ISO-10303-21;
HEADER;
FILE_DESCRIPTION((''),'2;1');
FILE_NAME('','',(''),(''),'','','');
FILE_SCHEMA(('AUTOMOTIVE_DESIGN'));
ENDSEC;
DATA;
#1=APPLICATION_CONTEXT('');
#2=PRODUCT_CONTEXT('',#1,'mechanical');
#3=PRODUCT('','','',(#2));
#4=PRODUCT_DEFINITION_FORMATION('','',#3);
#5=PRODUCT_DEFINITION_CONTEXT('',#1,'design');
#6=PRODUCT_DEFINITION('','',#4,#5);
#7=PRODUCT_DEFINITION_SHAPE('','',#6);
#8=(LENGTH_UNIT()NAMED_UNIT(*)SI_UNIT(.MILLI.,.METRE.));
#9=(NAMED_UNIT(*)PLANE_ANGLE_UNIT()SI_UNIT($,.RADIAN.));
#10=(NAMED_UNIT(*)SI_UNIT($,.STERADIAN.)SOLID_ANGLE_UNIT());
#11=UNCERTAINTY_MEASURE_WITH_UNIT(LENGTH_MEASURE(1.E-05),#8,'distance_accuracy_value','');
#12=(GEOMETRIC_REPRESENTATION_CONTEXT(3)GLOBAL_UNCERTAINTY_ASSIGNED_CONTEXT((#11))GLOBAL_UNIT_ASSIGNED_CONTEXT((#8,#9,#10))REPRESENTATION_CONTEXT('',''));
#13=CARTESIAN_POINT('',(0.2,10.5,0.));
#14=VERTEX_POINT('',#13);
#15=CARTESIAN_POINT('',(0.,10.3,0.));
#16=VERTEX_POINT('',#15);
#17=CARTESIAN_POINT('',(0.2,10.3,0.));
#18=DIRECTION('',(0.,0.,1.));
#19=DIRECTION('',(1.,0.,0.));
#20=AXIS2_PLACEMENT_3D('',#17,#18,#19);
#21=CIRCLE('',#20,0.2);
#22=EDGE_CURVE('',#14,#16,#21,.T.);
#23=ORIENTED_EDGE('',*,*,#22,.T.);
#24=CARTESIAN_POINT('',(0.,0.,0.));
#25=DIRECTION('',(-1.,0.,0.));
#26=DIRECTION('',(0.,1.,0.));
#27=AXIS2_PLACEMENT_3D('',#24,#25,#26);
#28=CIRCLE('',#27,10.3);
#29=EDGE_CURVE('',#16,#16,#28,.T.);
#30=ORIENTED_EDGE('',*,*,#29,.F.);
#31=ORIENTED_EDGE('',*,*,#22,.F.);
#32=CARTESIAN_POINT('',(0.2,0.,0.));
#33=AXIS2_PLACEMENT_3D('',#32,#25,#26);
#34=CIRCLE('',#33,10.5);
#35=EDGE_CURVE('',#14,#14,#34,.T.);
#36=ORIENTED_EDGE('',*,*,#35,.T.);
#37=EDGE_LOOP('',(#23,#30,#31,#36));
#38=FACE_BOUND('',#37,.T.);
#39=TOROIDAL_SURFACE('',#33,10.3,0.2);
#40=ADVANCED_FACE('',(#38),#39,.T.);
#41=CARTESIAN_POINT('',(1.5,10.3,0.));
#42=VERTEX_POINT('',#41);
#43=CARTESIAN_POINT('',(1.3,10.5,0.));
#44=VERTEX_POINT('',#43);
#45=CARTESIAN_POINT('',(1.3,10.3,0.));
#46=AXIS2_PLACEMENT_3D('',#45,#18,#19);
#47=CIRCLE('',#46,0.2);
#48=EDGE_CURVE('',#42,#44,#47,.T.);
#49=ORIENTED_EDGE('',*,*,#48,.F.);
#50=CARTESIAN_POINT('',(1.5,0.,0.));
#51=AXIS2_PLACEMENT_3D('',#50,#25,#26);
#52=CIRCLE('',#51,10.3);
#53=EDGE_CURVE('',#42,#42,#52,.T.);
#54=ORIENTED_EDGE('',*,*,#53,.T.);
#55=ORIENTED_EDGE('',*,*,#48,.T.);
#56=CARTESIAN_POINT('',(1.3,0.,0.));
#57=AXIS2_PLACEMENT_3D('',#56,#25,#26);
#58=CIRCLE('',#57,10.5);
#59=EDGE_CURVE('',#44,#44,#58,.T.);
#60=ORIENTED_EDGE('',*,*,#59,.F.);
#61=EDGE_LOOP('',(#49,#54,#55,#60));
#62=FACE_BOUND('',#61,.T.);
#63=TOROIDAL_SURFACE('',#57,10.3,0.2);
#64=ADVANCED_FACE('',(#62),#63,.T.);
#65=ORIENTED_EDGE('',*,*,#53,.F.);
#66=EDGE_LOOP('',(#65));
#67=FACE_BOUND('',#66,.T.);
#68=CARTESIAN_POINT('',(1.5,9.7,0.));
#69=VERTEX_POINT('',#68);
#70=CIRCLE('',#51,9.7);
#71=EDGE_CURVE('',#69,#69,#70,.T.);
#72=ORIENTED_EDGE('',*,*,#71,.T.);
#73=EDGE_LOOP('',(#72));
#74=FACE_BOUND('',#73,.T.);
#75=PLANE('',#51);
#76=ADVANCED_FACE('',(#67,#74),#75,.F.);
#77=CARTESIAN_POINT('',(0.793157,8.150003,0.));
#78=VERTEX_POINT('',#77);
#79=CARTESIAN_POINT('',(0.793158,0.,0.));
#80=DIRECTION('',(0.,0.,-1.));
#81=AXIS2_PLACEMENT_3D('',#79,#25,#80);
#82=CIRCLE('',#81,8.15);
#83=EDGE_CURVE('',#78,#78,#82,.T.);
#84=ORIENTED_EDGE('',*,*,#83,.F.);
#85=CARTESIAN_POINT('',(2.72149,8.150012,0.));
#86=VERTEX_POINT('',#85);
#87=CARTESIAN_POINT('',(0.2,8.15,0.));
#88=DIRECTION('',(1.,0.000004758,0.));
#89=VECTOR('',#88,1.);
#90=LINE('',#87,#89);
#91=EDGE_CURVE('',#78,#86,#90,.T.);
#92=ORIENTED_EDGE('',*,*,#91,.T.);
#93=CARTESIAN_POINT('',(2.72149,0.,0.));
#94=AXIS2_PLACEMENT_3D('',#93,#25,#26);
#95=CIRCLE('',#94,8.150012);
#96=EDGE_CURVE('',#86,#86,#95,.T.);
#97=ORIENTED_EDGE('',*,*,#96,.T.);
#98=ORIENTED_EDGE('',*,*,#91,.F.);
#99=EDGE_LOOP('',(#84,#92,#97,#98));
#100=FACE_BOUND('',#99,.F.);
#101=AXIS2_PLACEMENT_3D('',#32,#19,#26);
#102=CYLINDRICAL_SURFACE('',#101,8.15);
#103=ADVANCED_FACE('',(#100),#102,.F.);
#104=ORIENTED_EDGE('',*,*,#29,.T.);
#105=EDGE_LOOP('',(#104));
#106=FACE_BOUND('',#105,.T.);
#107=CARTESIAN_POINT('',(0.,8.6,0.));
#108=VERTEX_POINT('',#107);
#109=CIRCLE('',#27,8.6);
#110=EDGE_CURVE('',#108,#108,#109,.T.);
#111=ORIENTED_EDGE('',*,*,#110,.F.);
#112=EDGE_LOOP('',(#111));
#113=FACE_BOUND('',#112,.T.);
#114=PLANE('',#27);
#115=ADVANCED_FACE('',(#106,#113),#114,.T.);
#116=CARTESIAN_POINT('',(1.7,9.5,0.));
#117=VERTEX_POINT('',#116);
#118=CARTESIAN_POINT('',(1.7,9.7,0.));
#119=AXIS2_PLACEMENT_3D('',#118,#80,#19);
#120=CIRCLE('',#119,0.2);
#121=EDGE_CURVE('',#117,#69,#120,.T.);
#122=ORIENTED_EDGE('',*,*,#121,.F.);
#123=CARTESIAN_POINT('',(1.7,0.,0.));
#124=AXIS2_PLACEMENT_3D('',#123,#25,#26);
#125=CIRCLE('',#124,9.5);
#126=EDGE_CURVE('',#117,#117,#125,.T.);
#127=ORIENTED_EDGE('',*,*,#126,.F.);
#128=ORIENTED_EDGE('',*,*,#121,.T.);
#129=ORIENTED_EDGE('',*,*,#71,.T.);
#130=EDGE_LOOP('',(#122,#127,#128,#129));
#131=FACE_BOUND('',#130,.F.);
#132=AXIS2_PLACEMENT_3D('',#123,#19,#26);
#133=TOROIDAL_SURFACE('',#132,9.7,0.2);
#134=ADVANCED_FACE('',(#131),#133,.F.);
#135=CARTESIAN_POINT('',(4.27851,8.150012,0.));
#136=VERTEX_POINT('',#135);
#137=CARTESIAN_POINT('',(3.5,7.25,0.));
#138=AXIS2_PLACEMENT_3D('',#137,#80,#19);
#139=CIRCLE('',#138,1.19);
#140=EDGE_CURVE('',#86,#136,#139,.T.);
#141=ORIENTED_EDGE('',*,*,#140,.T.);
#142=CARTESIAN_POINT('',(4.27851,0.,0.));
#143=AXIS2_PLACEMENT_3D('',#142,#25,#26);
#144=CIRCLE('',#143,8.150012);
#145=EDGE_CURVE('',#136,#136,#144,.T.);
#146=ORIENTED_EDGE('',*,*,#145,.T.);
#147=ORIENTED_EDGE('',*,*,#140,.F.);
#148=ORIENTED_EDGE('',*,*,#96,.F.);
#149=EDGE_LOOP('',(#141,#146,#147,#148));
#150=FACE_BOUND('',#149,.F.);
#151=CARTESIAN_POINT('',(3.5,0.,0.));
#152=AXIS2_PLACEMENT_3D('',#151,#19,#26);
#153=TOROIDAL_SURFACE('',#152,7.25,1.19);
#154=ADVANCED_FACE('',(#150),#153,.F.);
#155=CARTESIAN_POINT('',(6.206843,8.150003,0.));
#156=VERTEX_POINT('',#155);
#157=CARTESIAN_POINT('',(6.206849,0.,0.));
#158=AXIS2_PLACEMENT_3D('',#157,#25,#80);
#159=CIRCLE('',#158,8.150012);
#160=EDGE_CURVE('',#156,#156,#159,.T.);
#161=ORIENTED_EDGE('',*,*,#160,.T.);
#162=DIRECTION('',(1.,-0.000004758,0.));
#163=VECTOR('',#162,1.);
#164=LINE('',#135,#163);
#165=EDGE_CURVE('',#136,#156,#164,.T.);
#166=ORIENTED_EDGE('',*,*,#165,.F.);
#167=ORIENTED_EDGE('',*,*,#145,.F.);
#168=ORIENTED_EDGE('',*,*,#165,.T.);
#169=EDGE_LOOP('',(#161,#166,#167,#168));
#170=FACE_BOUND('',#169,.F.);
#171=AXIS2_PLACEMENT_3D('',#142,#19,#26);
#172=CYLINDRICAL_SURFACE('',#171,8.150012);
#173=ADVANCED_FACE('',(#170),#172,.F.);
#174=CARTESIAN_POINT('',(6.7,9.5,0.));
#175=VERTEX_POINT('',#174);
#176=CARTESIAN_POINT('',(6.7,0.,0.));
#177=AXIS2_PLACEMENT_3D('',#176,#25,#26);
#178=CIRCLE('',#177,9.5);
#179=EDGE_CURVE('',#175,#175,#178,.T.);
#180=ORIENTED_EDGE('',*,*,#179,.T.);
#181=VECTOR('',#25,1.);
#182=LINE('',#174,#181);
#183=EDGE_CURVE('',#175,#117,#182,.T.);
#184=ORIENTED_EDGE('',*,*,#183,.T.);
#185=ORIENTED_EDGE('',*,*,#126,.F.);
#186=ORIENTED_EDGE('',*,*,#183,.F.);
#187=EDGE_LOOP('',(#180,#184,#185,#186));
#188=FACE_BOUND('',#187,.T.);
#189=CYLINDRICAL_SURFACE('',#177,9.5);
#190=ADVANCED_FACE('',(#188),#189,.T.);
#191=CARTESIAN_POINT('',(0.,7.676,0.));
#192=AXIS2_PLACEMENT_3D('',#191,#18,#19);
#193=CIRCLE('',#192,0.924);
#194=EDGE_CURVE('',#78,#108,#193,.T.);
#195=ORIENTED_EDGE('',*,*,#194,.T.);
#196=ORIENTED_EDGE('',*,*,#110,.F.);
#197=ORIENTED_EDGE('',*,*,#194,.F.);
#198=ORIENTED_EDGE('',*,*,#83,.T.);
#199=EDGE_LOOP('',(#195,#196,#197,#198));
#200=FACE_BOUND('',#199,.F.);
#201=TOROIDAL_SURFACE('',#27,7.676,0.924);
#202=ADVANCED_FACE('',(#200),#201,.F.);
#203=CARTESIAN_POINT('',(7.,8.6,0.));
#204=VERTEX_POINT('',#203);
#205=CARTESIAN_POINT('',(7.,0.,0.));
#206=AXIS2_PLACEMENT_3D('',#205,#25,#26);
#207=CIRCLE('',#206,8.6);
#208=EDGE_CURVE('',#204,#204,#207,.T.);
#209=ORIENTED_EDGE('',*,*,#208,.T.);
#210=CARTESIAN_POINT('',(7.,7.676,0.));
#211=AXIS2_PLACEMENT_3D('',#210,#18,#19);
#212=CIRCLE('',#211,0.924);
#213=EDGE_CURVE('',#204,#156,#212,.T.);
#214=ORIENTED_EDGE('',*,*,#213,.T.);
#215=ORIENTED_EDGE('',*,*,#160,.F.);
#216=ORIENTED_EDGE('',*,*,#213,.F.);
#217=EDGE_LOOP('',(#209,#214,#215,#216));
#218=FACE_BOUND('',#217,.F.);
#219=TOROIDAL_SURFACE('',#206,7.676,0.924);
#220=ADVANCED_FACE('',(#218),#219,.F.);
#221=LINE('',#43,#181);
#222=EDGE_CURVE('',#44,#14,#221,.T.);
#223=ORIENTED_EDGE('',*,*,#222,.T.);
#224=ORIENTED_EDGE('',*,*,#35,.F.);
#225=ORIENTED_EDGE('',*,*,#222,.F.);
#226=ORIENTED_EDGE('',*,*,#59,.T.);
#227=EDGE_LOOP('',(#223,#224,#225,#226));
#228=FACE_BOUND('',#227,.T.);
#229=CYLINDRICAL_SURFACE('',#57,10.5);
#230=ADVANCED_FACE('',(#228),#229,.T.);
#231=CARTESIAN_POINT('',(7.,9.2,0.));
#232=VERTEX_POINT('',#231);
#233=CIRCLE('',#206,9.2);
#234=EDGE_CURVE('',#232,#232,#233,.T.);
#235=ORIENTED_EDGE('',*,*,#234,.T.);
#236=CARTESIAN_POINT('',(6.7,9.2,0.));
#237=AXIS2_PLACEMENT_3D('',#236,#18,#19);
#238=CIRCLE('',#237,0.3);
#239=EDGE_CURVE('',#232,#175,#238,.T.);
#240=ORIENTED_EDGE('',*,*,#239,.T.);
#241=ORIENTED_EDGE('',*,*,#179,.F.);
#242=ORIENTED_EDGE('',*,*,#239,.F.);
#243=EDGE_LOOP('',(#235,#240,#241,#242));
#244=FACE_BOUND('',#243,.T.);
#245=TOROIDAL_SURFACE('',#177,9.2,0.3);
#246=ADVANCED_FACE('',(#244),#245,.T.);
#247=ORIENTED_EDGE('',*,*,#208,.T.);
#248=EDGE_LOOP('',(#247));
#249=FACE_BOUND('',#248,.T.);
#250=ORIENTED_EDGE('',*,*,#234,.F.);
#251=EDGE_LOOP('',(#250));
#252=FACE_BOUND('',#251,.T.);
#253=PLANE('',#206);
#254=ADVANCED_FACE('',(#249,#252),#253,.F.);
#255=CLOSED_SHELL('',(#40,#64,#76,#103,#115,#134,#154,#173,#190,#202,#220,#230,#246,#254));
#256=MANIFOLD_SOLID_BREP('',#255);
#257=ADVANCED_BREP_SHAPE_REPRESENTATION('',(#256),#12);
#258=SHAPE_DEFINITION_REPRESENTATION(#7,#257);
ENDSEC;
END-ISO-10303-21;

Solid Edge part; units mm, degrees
sketch "Sketch1" plane through (0, 0, 0) normal (0, 0, 1) x (1, 0, 0)
  line L0 (0, 10.3) -> (0, 8.35)
  arc A0 (0, 8.35) -> (0.2, 8.15) centre (0.2, 8.35) ccw
  line L1 (0.2, 8.15) -> (2.7215, 8.15)
  arc A1 (2.7215, 8.15) -> (4.2785, 8.15) centre (3.5, 7.25) cw
  line L2 (4.2785, 8.15) -> (6.8, 8.15)
  arc A2 (6.8, 8.15) -> (7, 8.35) centre (6.8, 8.35) ccw
  line L3 (7, 8.35) -> (7, 9.2)
  arc A3 (7, 9.2) -> (6.7, 9.5) centre (6.7, 9.2) ccw
  line L4 (6.7, 9.5) -> (1.7, 9.5)
  arc A4 (1.7, 9.5) -> (1.5, 9.7) centre (1.7, 9.7) cw
  line L5 (1.5, 9.7) -> (1.5, 10.3)
  arc A5 (1.5, 10.3) -> (1.3, 10.5) centre (1.3, 10.3) ccw
  line L6 (1.3, 10.5) -> (0.2, 10.5)
  arc A6 (0.2, 10.5) -> (0, 10.3) centre (0.2, 10.3) ccw
revolve "RevolvedProtrusion1" add sketch "Sketch1" angle 360 about axis through (50, 0, 0) along (-1, 0, 0)
sketch "Sketch2" plane through (0, 0, 0) normal (0, 0, 1) x (1, 0, 0)
  line L0 (0, 8.6) -> (0, 2.0375)
  line L1 (0, 2.0375) -> (7, 2.0375)
  line L2 (7, 2.0375) -> (7, 8.6)
  arc A0 (7, 8.6) -> (6.076, 7.676) centre (7, 7.676) ccw
  line L3 (6.076, 7.676) -> (6.076, 4.075)
  line L4 (6.076, 4.075) -> (0.924, 4.075)
  line L5 (0.924, 4.075) -> (0.924, 7.676)
  arc A1 (0.924, 7.676) -> (0, 8.6) centre (0, 7.676) ccw
revolve "RevolvedCutout1" cut sketch "Sketch2" angle 360 about axis through (50, 0, 0) along (-1, 0, 0)
